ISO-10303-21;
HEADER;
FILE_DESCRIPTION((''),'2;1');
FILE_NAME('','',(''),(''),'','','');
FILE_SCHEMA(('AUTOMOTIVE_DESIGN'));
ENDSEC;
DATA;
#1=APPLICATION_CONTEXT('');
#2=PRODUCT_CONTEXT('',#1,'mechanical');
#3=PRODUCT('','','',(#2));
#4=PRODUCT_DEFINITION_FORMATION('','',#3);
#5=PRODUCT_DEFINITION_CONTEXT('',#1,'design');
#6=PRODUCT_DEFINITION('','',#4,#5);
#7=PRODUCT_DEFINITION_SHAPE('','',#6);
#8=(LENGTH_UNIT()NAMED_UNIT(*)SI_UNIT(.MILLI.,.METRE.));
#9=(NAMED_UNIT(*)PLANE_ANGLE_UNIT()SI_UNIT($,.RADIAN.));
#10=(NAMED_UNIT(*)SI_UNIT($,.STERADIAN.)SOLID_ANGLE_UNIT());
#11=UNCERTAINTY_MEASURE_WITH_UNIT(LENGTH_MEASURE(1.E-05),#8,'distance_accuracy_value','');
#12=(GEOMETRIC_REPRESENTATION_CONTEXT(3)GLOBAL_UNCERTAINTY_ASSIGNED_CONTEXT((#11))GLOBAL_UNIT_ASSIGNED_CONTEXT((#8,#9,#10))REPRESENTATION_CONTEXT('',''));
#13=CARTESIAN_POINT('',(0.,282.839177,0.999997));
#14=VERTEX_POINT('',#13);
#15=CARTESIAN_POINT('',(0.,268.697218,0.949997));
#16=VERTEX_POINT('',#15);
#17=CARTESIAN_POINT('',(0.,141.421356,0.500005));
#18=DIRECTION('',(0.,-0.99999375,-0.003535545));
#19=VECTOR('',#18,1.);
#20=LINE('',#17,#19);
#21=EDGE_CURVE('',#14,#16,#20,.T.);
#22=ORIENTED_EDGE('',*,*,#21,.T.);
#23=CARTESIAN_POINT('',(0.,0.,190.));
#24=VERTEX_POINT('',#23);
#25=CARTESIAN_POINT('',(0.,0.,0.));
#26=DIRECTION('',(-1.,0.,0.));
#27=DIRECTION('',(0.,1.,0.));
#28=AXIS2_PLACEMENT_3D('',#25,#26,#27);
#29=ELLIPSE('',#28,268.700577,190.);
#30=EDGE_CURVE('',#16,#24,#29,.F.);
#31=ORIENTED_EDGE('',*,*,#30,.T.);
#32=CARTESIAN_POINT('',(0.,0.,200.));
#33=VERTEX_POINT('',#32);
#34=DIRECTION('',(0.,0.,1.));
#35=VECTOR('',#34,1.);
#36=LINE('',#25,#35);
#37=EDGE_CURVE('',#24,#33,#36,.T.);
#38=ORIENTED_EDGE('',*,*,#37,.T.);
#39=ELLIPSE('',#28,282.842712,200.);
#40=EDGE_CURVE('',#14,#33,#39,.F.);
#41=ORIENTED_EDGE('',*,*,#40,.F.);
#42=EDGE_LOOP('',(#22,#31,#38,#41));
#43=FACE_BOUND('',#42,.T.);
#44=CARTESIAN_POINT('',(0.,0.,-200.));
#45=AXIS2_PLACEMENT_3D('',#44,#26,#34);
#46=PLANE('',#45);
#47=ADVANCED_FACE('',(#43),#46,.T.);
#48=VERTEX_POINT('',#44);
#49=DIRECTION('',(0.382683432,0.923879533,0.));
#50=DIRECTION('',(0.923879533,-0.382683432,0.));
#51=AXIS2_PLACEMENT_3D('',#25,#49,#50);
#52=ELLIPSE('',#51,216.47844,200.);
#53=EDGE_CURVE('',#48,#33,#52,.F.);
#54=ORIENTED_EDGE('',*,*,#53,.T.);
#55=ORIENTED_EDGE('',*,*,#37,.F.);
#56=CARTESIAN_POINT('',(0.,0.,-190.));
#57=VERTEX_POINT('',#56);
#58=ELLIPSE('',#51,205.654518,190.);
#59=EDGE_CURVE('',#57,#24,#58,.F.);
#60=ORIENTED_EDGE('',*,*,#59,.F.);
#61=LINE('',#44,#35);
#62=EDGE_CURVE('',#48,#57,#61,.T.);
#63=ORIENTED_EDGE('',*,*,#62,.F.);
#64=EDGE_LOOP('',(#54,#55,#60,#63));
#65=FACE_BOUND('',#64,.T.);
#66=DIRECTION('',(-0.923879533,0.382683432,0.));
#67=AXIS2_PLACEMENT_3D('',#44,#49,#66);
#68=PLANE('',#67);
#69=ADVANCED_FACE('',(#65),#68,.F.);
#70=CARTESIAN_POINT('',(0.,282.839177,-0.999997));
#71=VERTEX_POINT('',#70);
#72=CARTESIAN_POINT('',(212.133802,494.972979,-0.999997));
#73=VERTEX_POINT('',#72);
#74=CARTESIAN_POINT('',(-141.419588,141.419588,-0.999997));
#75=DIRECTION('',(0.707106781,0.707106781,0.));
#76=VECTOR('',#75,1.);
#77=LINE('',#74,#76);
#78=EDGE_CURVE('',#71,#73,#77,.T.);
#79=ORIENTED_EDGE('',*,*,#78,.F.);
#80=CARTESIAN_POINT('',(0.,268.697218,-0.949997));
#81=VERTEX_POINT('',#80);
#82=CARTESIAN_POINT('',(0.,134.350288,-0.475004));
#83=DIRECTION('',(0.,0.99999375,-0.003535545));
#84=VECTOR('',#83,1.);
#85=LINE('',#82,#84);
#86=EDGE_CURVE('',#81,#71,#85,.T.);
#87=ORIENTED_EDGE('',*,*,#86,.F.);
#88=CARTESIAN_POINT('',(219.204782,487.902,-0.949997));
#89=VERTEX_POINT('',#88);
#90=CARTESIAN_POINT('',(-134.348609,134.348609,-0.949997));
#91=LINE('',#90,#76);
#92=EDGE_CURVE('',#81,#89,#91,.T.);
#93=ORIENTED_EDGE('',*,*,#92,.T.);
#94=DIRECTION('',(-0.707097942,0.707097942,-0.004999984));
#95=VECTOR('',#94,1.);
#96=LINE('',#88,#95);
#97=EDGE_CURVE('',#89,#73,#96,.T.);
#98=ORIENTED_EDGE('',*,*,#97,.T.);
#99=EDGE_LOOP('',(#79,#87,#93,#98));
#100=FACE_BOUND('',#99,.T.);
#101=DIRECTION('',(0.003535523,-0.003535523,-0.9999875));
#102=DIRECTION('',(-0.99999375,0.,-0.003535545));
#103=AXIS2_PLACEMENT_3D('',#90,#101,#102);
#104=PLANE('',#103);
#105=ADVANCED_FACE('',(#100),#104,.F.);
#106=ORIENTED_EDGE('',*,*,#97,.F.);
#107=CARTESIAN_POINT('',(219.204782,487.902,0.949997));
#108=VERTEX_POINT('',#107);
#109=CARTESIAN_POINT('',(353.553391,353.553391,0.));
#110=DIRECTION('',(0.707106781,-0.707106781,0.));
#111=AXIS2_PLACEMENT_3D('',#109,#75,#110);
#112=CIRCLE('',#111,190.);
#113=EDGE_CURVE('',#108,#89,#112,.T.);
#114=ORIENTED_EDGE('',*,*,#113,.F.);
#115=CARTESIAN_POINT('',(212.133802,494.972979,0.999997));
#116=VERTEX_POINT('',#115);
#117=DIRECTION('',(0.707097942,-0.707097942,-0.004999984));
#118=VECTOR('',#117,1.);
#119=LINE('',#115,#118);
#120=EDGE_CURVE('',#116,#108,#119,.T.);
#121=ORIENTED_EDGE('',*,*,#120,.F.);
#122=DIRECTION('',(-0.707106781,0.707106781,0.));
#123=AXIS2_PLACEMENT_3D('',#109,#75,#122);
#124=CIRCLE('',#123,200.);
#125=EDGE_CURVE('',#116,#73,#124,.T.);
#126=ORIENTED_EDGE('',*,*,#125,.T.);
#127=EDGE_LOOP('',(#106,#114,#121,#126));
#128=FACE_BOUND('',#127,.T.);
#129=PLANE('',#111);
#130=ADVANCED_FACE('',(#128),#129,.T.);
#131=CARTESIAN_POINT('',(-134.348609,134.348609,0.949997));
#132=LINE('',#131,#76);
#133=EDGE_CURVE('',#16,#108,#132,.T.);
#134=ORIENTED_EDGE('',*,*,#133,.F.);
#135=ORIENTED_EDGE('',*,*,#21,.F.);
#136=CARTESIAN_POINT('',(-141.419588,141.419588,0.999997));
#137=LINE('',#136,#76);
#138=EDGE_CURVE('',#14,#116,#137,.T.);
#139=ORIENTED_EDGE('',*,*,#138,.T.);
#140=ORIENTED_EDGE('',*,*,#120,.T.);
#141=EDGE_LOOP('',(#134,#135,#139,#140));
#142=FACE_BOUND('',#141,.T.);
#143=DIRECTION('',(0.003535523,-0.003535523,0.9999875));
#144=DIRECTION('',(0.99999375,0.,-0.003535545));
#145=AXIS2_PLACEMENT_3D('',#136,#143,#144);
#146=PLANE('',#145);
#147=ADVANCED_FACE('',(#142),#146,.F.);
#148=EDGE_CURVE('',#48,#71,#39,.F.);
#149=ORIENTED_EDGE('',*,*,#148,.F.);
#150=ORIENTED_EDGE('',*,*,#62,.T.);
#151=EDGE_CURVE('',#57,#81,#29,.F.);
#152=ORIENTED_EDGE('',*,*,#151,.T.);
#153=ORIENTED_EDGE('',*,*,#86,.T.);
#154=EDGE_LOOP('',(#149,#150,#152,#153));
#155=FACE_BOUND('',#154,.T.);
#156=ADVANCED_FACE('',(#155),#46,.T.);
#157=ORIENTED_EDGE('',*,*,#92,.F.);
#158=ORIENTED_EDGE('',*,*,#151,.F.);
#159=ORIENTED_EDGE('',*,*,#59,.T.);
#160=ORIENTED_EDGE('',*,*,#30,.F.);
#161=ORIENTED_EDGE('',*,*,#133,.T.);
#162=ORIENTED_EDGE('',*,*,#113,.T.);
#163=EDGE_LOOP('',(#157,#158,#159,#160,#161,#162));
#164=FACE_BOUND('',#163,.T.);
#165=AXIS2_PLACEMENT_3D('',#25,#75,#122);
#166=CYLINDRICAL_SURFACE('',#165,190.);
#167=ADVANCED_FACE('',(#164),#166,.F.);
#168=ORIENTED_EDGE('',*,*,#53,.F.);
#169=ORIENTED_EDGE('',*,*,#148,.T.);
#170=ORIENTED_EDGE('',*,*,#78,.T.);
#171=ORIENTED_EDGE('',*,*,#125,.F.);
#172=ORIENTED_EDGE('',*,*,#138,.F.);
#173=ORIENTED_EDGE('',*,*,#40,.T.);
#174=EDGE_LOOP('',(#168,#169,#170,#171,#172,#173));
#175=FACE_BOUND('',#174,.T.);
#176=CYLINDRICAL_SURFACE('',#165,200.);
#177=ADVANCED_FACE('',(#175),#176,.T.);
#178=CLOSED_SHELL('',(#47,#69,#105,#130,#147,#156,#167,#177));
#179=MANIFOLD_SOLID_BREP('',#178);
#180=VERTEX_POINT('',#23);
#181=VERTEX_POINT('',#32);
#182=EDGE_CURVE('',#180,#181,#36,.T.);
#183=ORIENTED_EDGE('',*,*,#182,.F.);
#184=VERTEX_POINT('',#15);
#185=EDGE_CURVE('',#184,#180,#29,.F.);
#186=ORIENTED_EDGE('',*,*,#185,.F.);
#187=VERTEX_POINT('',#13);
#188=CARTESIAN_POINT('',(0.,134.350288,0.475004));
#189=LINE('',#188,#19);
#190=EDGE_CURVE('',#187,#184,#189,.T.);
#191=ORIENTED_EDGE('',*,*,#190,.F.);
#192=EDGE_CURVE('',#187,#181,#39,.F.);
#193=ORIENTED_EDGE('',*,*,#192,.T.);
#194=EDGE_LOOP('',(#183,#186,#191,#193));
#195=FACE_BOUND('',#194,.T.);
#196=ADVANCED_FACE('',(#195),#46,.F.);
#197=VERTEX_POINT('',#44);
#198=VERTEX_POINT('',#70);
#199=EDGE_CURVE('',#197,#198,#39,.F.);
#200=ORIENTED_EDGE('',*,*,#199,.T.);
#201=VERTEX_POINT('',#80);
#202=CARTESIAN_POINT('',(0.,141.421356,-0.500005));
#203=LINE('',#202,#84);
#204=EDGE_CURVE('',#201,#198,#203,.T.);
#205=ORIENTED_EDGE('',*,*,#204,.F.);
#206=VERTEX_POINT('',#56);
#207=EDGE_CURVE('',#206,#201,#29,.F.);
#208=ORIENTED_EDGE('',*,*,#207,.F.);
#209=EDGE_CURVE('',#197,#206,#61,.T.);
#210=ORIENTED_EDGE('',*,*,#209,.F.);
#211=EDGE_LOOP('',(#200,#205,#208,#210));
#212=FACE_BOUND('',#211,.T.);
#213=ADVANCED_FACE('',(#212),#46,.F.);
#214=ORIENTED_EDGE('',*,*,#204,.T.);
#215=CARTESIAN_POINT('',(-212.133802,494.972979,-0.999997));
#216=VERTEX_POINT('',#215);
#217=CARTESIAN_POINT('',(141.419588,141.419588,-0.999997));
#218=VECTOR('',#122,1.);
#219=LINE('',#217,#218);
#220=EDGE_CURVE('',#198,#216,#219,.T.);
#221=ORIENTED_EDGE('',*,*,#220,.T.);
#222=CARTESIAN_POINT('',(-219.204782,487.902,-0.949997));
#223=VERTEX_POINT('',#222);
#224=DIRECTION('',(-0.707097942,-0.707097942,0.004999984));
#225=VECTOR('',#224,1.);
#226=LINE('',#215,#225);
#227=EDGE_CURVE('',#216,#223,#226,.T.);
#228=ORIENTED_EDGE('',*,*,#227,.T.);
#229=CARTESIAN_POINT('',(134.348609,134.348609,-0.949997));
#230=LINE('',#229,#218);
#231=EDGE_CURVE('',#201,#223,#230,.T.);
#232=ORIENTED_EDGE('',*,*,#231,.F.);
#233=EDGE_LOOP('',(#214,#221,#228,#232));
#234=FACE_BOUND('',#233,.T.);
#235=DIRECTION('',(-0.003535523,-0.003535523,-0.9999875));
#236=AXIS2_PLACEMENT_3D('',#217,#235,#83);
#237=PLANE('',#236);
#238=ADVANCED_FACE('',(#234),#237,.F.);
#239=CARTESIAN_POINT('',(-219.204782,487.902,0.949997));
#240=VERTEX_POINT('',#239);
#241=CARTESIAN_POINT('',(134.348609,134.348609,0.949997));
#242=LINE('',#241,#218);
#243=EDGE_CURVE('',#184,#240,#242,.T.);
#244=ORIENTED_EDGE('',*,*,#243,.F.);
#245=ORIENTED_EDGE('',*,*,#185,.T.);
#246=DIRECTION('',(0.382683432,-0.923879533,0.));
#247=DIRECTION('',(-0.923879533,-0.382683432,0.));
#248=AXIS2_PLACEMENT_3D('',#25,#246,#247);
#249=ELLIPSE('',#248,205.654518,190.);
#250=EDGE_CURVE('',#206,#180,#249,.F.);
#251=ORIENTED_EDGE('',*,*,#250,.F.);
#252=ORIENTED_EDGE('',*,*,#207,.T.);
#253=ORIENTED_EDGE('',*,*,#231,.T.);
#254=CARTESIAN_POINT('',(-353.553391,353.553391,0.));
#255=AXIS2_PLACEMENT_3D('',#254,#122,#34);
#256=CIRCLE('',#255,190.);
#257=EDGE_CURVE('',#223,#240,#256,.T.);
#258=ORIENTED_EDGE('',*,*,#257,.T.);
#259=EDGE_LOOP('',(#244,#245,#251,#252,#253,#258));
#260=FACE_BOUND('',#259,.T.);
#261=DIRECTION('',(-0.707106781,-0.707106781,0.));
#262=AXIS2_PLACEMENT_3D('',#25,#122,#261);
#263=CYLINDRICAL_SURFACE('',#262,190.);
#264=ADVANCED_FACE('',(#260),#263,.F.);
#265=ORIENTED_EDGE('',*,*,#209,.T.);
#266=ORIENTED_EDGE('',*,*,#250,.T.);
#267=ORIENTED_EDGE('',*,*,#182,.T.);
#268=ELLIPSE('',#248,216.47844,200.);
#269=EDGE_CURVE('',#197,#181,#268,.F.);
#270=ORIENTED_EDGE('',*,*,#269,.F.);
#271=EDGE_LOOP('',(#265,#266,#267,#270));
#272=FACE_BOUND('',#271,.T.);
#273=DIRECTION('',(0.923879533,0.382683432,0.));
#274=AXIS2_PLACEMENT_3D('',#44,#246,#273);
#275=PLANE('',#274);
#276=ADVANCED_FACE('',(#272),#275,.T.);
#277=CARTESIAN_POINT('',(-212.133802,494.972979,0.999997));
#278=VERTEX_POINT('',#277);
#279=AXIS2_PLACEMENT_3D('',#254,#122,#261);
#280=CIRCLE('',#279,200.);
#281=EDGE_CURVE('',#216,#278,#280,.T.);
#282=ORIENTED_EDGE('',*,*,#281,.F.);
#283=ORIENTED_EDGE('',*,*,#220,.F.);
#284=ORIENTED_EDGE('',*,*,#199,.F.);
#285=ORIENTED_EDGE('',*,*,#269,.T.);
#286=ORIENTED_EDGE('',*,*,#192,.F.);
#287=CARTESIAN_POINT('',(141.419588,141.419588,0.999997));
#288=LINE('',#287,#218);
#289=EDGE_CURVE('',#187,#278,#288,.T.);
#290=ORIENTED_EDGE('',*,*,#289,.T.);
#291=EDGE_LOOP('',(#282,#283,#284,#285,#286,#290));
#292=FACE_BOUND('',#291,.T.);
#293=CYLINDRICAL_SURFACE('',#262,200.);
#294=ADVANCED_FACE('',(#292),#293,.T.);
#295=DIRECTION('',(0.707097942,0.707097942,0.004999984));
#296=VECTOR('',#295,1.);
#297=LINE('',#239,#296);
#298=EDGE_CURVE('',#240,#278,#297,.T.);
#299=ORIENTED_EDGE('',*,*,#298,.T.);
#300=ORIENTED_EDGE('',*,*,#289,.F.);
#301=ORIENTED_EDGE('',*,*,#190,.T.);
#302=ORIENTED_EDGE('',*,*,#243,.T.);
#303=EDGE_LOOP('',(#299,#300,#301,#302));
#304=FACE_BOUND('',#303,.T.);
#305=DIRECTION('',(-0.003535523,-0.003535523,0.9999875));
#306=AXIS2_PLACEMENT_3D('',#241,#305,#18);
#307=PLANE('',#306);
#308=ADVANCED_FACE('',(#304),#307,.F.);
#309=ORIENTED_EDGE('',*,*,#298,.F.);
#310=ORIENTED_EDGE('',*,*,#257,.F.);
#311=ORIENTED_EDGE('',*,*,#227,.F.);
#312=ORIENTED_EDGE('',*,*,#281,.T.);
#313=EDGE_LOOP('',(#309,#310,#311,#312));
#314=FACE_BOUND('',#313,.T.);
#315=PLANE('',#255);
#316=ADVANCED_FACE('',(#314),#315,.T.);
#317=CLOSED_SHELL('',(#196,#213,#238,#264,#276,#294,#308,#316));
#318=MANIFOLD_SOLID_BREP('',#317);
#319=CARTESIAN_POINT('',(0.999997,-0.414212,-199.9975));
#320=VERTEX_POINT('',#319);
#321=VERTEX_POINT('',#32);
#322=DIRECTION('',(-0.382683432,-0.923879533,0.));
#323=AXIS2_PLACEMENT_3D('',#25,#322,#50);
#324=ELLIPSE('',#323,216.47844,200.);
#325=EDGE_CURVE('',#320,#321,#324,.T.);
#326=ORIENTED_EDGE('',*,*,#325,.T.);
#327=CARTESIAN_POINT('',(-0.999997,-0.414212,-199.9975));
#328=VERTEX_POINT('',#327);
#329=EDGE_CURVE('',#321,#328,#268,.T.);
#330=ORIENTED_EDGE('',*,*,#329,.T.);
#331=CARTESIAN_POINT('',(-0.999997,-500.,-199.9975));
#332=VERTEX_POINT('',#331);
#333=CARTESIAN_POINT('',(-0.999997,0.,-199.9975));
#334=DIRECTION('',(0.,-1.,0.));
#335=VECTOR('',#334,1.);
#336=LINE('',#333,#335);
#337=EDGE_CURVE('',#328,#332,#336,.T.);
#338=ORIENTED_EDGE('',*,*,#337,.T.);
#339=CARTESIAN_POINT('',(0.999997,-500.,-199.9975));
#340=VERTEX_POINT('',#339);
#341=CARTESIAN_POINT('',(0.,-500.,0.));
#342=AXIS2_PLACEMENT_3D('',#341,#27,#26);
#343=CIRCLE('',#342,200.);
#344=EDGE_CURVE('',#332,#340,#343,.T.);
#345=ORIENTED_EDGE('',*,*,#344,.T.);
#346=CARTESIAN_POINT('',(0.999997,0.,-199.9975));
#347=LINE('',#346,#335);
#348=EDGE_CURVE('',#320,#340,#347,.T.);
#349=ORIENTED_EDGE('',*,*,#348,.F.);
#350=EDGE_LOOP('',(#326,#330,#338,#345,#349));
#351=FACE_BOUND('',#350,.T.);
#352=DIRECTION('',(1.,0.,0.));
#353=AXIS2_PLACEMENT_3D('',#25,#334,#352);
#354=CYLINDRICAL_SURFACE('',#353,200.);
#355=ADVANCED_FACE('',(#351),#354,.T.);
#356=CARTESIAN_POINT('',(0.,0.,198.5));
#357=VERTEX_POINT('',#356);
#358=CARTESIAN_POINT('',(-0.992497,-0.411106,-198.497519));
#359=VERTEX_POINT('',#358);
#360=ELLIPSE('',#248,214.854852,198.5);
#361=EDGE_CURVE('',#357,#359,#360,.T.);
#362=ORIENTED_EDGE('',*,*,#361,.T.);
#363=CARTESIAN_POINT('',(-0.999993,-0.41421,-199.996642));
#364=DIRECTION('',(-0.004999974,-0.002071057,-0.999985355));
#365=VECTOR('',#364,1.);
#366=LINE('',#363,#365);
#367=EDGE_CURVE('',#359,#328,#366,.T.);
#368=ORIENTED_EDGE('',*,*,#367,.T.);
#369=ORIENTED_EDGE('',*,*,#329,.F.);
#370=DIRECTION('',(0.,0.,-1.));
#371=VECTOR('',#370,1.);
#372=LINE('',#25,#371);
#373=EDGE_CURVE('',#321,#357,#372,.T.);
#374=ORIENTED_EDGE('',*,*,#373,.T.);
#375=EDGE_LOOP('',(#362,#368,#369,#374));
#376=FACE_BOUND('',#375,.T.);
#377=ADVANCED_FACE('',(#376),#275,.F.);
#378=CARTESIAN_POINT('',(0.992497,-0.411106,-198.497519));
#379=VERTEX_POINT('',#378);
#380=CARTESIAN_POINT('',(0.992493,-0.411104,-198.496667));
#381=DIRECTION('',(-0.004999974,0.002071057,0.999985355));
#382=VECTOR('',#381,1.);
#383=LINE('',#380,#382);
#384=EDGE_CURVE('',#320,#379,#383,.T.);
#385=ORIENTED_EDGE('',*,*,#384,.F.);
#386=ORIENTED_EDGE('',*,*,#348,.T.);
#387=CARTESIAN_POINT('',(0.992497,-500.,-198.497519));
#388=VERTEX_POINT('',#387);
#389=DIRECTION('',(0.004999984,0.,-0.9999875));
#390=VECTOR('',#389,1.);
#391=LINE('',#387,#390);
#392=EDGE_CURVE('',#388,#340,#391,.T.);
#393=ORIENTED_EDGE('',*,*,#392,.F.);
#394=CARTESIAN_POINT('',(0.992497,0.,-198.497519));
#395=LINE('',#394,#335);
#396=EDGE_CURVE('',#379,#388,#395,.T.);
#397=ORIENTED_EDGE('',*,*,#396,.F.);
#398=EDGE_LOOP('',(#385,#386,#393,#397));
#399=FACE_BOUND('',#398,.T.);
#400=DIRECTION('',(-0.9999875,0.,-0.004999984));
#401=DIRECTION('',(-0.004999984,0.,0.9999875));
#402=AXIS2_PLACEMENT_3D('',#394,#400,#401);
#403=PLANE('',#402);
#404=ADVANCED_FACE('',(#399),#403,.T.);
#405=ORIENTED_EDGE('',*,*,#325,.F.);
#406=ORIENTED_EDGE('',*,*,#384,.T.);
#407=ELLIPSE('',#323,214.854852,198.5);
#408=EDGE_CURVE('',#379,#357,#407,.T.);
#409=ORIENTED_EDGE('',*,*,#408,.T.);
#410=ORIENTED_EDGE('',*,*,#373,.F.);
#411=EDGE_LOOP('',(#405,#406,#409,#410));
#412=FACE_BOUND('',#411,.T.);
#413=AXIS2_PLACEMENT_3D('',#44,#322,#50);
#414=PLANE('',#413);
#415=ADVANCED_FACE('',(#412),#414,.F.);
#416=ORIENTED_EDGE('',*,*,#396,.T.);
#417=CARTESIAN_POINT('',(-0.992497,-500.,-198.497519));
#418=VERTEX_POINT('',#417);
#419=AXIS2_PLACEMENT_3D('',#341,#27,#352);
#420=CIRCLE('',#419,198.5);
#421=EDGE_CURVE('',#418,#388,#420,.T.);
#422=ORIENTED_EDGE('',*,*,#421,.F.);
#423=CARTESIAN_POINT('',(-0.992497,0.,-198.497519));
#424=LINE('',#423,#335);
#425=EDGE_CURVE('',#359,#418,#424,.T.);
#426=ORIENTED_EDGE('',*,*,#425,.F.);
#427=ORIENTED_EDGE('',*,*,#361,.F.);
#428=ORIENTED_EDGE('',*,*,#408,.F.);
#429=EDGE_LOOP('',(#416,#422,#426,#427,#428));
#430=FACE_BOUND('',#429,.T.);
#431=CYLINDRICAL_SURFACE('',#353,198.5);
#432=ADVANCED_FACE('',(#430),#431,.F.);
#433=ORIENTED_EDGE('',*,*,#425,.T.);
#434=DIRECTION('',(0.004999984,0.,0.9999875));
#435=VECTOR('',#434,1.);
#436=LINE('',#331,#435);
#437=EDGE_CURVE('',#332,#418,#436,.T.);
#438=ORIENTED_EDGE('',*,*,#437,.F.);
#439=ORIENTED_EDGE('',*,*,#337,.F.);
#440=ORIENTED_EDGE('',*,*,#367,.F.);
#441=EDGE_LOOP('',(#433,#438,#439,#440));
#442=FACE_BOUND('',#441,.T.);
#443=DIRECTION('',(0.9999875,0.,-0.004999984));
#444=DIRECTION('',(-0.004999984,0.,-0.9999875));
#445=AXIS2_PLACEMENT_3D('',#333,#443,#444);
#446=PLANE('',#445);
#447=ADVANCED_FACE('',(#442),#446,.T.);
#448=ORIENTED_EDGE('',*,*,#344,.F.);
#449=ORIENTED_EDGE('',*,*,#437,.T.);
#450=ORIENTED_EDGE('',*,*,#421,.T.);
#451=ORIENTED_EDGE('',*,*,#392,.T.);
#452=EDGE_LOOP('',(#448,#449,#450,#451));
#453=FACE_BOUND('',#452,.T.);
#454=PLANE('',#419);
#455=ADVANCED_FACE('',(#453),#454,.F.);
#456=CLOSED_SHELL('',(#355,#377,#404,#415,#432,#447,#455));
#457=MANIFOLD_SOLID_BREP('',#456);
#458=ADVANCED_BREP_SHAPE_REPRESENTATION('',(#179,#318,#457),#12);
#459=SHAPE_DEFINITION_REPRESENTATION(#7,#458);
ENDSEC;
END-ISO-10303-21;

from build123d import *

# Parameters (mm, degrees)
BASE_FLANGE1_START      = -500
BASE_FLANGE1_DEPTH      = 500
CUT_EXTRUDE1_DEPTH      = 729.009787024
CUT_EXTRUDE1_DEPTH_BACK = 729.009787024
BASE_FLANGE2_DEPTH      = 500
CUT_EXTRUDE6_DEPTH      = 729.009787024
CUT_EXTRUDE6_DEPTH_BACK = 729.009787024
BASE_FLANGE3_DEPTH      = 500
CUT_EXTRUDE7_DEPTH      = 732.436941916
CUT_EXTRUDE7_DEPTH_BACK = 732.436941916


# Read off the part's stored shape, not the designer's step: Base-Flange1
# Sheet-metal steps are written as plain solids
with BuildPart() as part:
    # Base-Flange1 outline → Base-Flange1 (new body)
    with BuildSketch(Plane(origin=(353.553390593, 353.553390593, 0), x_dir=(0.7071067811865486, -0.7071067811865465, 0), z_dir=(0.7071067811865465, 0.7071067811865486, 0)).offset(BASE_FLANGE1_START)):
        with BuildLine():
            Line((-189.997625, -0.949997031), (-199.9975, -0.999996875))
            ThreePointArc((-199.9975, -0.999996875), (200, 0), (-199.9975, 0.999996875))
            Line((-199.9975, 0.999996875), (-189.997625, 0.949997031))
            ThreePointArc((-189.997625, 0.949997031), (190, 0), (-189.997625, -0.949997031))
        make_face()
    extrude(amount=BASE_FLANGE1_DEPTH)

    # Sketch7 → Cut-Extrude1 (cut, two sides: drawn at the far end of the back side and taken through both)
    with BuildSketch(Plane.XY.offset(-CUT_EXTRUDE1_DEPTH_BACK)):
        Polygon((141.421356237, -141.421356237), (200, -82.842712475), (0, 0), align=None)
        Polygon((0, 282.839176941), (0, 0), (-141.41958847, 141.41958847), align=None)
    extrude(amount=CUT_EXTRUDE1_DEPTH + CUT_EXTRUDE1_DEPTH_BACK, mode=Mode.SUBTRACT)


with BuildPart() as body_2:
    # Sketch8 → Base-Flange2 (new body)
    with BuildSketch(Plane(origin=(-353.553390593, 353.553390593, 0), x_dir=(0, 0, 1), z_dir=(-0.7071067811865489, 0.7071067811865462, 0))):
        with BuildLine():
            ThreePointArc((-0.999996875, 199.9975), (0, -200), (0.999996875, 199.9975))
            Line((0.999996875, 199.9975), (0.949997031, 189.997625))
            ThreePointArc((0.949997031, 189.997625), (0, -190), (-0.949997031, 189.997625))
            Line((-0.949997031, 189.997625), (-0.999996875, 199.9975))
        make_face()
    extrude(amount=-BASE_FLANGE2_DEPTH)

    # Sketch11 → Cut-Extrude6 (cut, two sides: drawn at the far end of the back side and taken through both)
    with BuildSketch(Plane.XY.offset(-CUT_EXTRUDE6_DEPTH_BACK)):
        Polygon((-141.421356237, -141.421356237), (-200, -82.842712475), (0, 0), align=None)
        Polygon((141.41958847, 141.41958847), (0, 282.839176941), (0, 0), align=None)
    extrude(amount=CUT_EXTRUDE6_DEPTH + CUT_EXTRUDE6_DEPTH_BACK, mode=Mode.SUBTRACT)


with BuildPart() as body_3:
    # Sketch12 → Base-Flange3 (new body)
    with BuildSketch(Plane(origin=(0, -500, 0), x_dir=(1, 0, 0), z_dir=(0, 1, 0))):
        with BuildLine():
            ThreePointArc((-0.999996875, 199.9975), (0, -200), (0.999996875, 199.9975))
            Line((0.999996875, 199.9975), (0.992496898, 198.49751875))
            ThreePointArc((0.992496898, 198.49751875), (0, -198.5), (-0.992496898, 198.49751875))
            Line((-0.992496898, 198.49751875), (-0.999996875, 199.9975))
        make_face()
    extrude(amount=BASE_FLANGE3_DEPTH)

    # Sketch15 → Cut-Extrude7 (cut, two sides: drawn at the far end of the back side and taken through both)
    with BuildSketch(Plane.XY.offset(-CUT_EXTRUDE7_DEPTH_BACK)):
        Polygon((-200, -82.842712475), (0, 0), (-200, 0), align=None)
        Polygon((200, -82.842712475), (200, 0), (0, 0), align=None)
    extrude(amount=CUT_EXTRUDE7_DEPTH + CUT_EXTRUDE7_DEPTH_BACK, mode=Mode.SUBTRACT)


solid = Compound([part.part, body_2.part, body_3.part])
